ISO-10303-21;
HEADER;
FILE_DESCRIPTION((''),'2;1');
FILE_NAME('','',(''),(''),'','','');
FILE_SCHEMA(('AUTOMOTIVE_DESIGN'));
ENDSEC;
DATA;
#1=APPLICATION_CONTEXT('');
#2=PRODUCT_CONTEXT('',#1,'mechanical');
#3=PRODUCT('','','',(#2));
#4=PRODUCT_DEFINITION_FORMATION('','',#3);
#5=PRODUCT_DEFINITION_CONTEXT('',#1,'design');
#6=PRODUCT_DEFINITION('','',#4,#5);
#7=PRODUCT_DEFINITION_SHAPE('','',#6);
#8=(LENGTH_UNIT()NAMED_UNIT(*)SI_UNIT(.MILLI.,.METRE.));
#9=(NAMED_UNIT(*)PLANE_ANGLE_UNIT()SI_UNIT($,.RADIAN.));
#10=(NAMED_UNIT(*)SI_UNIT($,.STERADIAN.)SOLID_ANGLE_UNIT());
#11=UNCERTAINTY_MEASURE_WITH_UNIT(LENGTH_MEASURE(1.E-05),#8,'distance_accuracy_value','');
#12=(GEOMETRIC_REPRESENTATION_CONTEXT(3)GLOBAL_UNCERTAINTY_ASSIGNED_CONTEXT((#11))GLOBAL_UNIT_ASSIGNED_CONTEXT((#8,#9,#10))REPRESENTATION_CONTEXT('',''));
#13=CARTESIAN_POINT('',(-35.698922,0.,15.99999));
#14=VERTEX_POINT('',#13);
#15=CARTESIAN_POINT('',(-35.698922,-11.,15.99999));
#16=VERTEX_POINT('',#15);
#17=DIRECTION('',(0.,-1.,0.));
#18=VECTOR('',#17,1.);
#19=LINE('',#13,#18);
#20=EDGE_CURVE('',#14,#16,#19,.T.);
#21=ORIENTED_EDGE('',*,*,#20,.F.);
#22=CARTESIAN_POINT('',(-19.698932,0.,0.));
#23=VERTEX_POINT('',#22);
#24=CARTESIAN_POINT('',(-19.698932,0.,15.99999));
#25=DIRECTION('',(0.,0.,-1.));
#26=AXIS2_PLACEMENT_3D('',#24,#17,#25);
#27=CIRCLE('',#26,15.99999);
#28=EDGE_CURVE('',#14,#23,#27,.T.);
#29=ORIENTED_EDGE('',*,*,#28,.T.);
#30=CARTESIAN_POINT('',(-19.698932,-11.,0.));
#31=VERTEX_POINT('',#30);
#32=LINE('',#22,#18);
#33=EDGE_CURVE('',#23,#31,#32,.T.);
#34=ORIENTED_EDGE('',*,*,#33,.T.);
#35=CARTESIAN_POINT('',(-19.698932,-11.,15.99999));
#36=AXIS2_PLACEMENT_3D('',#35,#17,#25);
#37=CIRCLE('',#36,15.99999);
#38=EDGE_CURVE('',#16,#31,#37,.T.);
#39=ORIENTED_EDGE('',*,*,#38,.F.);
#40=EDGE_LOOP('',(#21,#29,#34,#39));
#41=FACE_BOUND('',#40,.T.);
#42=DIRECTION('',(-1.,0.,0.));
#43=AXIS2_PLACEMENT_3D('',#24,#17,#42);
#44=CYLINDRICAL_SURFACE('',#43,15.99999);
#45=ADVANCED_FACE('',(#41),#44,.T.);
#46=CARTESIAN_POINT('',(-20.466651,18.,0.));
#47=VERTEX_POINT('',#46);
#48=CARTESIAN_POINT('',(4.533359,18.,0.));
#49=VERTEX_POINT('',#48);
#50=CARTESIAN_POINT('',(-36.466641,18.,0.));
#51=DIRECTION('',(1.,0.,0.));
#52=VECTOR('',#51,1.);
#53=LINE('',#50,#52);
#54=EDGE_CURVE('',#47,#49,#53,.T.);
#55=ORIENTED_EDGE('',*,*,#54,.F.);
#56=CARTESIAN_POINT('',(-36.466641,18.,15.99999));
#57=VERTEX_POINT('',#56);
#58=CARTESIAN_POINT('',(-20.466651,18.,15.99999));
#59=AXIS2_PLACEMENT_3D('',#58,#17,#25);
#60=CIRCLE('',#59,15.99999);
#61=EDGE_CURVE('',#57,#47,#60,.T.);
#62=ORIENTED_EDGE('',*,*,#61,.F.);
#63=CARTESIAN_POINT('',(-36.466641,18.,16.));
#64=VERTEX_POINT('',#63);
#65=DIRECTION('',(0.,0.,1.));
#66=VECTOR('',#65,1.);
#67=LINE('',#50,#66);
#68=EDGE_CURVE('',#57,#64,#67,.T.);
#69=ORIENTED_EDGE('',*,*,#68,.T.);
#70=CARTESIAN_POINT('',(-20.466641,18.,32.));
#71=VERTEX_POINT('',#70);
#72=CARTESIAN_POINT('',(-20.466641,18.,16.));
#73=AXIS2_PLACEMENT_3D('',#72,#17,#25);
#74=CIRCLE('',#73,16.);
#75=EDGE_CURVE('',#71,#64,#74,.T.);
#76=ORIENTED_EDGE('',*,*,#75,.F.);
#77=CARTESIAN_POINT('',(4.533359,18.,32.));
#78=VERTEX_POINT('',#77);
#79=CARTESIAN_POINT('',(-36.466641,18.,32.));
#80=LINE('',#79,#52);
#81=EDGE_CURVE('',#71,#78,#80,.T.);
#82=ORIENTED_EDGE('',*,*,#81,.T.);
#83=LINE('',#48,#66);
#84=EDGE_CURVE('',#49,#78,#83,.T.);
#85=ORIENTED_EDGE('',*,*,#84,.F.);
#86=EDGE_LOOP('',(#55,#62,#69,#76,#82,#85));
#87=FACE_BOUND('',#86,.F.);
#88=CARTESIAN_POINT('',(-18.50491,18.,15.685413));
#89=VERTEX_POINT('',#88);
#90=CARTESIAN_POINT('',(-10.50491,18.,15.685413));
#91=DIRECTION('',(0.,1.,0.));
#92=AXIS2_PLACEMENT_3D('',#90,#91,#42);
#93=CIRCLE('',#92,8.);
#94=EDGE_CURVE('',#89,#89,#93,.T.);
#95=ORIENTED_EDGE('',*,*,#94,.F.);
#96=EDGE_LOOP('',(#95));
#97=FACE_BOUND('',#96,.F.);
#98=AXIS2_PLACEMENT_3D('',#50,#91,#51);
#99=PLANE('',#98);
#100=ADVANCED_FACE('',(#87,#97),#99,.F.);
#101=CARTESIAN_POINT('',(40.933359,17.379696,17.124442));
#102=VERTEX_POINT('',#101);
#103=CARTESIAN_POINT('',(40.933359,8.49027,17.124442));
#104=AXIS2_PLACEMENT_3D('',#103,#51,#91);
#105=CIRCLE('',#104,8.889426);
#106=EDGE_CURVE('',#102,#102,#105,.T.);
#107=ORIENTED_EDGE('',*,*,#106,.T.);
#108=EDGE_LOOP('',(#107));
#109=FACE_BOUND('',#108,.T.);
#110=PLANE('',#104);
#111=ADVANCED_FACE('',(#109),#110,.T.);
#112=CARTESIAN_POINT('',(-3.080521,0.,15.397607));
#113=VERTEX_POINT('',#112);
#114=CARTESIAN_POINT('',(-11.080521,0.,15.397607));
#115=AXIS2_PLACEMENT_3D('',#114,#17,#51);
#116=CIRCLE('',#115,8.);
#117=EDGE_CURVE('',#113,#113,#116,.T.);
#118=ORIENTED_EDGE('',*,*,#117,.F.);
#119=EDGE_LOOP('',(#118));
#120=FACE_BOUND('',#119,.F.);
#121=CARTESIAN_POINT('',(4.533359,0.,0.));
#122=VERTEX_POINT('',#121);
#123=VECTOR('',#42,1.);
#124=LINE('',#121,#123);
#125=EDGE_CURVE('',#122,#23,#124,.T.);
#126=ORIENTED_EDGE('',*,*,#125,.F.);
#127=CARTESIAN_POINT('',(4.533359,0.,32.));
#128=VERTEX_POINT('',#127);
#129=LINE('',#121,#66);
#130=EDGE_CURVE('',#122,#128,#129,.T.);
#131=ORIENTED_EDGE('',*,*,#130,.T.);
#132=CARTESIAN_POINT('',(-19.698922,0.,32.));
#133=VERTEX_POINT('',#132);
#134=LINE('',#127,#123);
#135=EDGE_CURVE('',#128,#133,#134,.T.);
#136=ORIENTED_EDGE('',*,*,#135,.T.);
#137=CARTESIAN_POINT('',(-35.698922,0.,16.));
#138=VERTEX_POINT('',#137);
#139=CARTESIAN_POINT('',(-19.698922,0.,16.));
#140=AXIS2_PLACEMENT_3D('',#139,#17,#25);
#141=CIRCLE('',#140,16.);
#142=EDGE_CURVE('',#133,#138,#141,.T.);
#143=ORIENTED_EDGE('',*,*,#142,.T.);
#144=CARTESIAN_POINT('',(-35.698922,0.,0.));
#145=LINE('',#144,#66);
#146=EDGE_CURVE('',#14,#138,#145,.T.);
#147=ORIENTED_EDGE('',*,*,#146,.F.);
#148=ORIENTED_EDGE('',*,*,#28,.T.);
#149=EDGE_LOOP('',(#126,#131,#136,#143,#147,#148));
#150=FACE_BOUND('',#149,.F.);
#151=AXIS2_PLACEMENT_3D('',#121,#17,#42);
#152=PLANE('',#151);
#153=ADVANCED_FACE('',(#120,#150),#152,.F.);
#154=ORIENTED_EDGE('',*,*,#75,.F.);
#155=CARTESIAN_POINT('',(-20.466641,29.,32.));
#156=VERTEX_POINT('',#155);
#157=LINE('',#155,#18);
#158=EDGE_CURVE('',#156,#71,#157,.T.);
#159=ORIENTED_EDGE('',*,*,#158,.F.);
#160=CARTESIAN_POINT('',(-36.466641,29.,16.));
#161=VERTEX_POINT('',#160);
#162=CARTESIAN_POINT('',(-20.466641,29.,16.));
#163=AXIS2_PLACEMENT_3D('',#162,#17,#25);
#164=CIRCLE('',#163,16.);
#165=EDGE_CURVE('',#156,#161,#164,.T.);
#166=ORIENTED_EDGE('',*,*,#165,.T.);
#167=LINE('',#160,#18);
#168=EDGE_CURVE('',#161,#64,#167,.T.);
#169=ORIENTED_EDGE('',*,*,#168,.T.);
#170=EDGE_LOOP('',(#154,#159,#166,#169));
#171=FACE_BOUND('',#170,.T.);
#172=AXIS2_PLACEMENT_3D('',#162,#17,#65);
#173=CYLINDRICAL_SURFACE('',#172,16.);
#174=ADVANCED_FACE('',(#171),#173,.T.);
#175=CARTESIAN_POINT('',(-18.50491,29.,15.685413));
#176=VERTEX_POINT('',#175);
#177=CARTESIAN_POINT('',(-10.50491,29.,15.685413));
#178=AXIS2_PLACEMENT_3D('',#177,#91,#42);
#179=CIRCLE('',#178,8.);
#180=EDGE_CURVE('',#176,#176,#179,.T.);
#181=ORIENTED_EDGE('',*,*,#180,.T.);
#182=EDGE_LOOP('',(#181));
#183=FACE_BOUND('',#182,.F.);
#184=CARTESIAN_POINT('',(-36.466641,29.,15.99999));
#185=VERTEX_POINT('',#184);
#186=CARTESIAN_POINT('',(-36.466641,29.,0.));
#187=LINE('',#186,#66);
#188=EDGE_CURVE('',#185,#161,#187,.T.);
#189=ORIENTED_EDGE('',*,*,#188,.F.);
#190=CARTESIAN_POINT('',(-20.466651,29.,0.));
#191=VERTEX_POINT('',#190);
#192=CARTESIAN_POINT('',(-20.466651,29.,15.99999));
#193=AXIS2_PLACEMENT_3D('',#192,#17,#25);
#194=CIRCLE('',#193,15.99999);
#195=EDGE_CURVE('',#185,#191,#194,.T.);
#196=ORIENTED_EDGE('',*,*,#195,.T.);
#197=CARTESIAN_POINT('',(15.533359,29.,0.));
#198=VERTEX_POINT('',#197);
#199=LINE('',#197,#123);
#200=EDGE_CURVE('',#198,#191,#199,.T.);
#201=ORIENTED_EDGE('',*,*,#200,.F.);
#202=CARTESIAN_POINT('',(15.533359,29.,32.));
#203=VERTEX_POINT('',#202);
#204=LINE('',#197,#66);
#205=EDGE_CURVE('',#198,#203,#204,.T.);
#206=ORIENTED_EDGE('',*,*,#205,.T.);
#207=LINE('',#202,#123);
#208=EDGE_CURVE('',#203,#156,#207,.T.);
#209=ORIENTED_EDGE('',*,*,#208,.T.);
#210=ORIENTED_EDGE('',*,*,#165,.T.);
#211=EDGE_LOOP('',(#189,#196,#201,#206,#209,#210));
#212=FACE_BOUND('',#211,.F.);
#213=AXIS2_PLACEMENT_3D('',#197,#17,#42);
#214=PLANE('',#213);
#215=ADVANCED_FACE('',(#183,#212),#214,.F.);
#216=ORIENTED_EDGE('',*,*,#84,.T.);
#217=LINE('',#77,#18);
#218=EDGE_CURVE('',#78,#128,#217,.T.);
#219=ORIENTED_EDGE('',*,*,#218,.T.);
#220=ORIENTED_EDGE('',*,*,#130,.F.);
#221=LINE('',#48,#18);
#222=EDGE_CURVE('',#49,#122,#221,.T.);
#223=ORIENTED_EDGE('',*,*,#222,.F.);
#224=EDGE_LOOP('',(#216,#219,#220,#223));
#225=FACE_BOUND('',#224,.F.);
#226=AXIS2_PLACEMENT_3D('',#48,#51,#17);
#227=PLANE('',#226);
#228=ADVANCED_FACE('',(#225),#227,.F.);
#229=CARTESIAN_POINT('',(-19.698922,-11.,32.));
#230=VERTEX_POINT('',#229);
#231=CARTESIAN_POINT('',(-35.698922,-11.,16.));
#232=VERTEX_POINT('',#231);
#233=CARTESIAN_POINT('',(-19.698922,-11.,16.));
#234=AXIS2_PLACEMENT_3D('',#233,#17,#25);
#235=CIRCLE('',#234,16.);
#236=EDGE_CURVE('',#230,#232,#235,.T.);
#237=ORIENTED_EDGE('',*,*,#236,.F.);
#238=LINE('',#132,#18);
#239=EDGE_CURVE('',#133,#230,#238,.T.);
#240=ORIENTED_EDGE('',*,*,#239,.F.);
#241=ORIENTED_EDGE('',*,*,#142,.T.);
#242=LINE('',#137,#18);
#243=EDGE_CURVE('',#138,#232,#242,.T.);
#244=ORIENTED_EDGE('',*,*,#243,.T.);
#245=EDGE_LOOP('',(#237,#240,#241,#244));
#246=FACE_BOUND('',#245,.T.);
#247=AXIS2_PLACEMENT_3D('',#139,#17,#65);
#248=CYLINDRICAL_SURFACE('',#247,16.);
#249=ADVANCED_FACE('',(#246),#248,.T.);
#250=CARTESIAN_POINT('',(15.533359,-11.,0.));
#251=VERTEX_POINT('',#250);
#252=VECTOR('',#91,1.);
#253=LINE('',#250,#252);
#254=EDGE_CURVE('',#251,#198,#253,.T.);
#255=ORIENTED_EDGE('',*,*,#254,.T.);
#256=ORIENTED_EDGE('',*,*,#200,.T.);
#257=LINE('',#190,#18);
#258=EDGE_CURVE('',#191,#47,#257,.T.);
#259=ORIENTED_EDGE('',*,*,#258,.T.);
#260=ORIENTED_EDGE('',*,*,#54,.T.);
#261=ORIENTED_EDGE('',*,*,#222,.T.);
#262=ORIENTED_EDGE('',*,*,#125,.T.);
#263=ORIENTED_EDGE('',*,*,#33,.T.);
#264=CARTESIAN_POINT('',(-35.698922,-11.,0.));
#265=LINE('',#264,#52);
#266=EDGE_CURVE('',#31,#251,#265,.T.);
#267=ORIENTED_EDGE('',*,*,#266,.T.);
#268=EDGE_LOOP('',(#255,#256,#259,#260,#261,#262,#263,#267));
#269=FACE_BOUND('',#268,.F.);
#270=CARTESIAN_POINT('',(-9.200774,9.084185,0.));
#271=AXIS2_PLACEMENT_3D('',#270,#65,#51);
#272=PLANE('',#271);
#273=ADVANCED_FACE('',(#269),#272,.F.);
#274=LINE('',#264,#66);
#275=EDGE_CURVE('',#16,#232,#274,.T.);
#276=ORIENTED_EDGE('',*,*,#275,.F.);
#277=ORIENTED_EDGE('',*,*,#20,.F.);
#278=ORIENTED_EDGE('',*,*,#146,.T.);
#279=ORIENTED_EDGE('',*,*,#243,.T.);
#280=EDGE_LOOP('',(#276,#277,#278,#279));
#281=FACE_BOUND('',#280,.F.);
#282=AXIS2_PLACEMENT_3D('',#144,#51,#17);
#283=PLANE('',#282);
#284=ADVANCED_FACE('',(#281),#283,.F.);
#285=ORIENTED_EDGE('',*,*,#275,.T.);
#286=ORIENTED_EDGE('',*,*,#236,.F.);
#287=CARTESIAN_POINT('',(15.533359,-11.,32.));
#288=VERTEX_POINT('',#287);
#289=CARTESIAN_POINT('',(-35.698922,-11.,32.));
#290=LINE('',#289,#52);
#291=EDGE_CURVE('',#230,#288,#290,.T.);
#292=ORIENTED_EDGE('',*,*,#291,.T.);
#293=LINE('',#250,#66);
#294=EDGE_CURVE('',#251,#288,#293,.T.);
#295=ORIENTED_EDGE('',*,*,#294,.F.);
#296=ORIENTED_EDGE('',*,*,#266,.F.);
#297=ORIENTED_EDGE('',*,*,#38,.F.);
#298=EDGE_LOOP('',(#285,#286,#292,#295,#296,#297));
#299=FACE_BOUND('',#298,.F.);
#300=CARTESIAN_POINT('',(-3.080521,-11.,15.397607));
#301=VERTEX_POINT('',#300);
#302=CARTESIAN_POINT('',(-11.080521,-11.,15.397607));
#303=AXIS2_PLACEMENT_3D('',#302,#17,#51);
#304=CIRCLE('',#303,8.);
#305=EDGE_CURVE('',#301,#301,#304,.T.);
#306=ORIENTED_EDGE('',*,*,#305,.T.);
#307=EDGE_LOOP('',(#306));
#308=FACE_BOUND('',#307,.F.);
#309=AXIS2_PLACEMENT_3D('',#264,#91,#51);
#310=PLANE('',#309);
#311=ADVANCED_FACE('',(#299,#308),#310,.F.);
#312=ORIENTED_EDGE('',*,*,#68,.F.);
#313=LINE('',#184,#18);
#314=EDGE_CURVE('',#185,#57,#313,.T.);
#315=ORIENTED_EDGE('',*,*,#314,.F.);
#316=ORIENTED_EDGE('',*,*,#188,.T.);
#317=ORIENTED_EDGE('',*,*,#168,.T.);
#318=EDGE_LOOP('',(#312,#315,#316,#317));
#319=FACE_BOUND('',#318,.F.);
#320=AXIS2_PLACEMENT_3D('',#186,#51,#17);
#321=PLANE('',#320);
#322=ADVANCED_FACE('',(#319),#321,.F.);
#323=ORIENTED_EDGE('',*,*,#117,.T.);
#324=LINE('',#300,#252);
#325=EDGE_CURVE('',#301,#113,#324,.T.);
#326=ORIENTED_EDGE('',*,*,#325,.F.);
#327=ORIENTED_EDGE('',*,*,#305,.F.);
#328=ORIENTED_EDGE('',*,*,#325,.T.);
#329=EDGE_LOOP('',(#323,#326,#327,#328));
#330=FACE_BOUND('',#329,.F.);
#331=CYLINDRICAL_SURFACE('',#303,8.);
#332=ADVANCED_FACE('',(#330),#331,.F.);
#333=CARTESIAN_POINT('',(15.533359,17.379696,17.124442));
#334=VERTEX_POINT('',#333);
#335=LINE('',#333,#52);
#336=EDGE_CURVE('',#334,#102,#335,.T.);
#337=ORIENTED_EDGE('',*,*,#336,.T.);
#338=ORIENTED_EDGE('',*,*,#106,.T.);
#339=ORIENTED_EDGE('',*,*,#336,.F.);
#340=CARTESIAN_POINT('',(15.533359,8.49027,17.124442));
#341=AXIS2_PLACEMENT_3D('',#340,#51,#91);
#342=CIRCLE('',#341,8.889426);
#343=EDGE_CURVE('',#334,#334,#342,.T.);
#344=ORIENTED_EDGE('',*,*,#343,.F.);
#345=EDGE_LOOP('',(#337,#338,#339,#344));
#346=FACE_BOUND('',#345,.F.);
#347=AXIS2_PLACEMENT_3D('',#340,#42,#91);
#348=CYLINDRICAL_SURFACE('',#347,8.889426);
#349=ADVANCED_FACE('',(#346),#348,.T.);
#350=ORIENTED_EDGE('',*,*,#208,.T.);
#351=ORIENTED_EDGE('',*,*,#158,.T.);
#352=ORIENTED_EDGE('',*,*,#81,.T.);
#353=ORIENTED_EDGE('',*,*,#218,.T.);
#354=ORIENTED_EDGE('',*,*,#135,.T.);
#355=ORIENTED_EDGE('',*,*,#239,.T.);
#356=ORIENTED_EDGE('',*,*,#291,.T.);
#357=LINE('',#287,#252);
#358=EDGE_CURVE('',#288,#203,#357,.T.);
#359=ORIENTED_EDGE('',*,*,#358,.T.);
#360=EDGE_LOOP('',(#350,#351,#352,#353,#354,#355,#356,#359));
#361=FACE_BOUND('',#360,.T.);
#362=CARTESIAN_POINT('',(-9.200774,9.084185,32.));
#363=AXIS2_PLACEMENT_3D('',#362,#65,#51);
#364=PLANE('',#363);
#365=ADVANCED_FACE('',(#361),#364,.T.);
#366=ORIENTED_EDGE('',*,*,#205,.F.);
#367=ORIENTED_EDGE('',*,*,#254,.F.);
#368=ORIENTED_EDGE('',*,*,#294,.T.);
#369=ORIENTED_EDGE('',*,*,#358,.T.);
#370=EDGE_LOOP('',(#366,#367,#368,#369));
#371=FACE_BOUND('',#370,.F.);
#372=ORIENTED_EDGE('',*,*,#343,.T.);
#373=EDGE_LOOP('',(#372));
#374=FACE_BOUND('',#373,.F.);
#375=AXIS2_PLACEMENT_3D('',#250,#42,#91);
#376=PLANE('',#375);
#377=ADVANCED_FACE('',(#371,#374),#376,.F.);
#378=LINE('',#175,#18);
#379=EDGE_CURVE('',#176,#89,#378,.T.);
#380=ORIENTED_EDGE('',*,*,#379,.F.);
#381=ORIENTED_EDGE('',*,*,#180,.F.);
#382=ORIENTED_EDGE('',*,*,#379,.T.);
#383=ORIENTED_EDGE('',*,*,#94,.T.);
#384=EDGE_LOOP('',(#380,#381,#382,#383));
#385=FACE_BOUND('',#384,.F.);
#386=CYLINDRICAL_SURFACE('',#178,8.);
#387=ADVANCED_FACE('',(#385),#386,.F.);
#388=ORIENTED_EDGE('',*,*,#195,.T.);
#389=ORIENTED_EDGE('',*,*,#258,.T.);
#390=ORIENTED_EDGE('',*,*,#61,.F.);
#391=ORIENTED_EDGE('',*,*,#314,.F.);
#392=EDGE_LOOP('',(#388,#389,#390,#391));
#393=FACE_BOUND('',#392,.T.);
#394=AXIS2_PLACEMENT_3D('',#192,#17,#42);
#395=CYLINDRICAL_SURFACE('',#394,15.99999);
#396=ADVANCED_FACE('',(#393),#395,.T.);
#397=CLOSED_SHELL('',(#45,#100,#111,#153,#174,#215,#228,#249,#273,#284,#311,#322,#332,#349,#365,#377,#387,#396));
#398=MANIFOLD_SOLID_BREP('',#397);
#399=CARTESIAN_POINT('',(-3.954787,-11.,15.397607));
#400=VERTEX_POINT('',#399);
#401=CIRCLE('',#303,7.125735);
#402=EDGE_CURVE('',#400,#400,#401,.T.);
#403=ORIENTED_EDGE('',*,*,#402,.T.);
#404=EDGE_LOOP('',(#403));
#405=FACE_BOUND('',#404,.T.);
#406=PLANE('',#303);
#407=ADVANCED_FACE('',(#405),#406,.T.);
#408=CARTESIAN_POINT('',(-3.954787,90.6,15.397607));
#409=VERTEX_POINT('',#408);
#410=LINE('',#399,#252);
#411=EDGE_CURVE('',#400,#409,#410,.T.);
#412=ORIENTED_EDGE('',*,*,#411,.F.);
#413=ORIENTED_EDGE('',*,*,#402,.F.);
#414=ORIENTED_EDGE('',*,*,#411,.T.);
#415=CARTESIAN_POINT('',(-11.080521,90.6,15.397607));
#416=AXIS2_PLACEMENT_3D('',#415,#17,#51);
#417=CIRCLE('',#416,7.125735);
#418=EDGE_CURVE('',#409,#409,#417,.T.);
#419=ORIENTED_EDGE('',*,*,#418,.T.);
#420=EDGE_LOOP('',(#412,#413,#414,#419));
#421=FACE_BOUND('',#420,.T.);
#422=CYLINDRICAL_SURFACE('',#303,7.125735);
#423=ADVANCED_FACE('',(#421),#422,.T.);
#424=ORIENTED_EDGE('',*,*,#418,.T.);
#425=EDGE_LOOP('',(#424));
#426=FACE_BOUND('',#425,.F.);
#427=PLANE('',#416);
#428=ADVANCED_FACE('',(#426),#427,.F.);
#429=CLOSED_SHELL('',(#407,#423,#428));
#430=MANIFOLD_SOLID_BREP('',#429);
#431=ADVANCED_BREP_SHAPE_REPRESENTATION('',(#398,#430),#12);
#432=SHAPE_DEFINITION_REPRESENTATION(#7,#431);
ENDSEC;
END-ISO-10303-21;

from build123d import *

# Parameters (mm, degrees)
F1_DEPTH  = 32
F2_R      = 8
F3_DEPTH  = 25.4
F4_R      = 8
F5_DEPTH  = 25.4
F6_R      = 16
F7_R      = 15.99999
F8_R      = 16
F9_R      = 15.99999
F10_R     = 8.8894259747
F11_DEPTH = 25.4
F12_R     = 7.125734637
F13_DEPTH = 101.6


# Not quite as in the source:
# - a fillet or chamfer is up to 0.001 mm smaller than in the source, because OpenCascade refuses the exact size


with BuildPart() as f1:
    # F0 (on Top) → F1 (new body)
    with BuildSketch(Plane.XY):
        Polygon((15.5333588993, 29), (-36.4666411007, 29), (-36.4666411007, 18), (4.5333588993, 18), (4.5333588993, 0), (-35.6989217131, 0), (-35.6989217131, -11), (15.5333588993, -11), align=None)
    extrude(amount=F1_DEPTH)

    # F2 (on face) → F3 (cut)
    with BuildSketch(Plane.XZ.offset(11)):
        with Locations((-11.0805211589, 15.3976073489)):
            Circle(F2_R)
    extrude(amount=-F3_DEPTH, mode=Mode.SUBTRACT)

    # F4 (on face) → F5 (cut)
    with BuildSketch(Plane(origin=(0, 29, 0), x_dir=(-1, 0, 0), z_dir=(0, 1, 0))):
        with Locations((10.5049097911, 15.6854130328)):
            Circle(F4_R)
    extrude(amount=-F5_DEPTH, mode=Mode.SUBTRACT)

    # F6
    f6_edges = [f1.edges().sort_by_distance(p)[0] for p in [
        (-35.698922, -5.5, 32),
    ]]
    fillet(f6_edges, radius=F6_R)

    # F7 (radius 16 in the source; OpenCascade refuses exactly that, so slightly less here)
    f7_edges = [f1.edges().sort_by_distance(p)[0] for p in [
        (-35.698922, -5.5, 0),
    ]]
    fillet(f7_edges, radius=F7_R)

    # F8
    f8_edges = [f1.edges().sort_by_distance(p)[0] for p in [
        (-36.466641, 23.5, 32),
    ]]
    fillet(f8_edges, radius=F8_R)

    # F9 (radius 16 in the source; OpenCascade refuses exactly that, so slightly less here)
    f9_edges = [f1.edges().sort_by_distance(p)[0] for p in [
        (-36.466641, 23.5, 0),
    ]]
    fillet(f9_edges, radius=F9_R)

    # F10 (on face) → F11 (join)
    with BuildSketch(Plane.YZ.offset(15.5333588993)):
        with Locations((8.4902700037, 17.1244423836)):
            Circle(F10_R)
    extrude(amount=F11_DEPTH)


with BuildPart() as f13:
    # F12 (on face) → F13 (new body)
    with BuildSketch(Plane.XZ.offset(11)):
        with Locations((-11.0805211589, 15.3976073489)):
            Circle(F12_R)
    extrude(amount=-F13_DEPTH)


solid = Compound([f1.part, f13.part])
